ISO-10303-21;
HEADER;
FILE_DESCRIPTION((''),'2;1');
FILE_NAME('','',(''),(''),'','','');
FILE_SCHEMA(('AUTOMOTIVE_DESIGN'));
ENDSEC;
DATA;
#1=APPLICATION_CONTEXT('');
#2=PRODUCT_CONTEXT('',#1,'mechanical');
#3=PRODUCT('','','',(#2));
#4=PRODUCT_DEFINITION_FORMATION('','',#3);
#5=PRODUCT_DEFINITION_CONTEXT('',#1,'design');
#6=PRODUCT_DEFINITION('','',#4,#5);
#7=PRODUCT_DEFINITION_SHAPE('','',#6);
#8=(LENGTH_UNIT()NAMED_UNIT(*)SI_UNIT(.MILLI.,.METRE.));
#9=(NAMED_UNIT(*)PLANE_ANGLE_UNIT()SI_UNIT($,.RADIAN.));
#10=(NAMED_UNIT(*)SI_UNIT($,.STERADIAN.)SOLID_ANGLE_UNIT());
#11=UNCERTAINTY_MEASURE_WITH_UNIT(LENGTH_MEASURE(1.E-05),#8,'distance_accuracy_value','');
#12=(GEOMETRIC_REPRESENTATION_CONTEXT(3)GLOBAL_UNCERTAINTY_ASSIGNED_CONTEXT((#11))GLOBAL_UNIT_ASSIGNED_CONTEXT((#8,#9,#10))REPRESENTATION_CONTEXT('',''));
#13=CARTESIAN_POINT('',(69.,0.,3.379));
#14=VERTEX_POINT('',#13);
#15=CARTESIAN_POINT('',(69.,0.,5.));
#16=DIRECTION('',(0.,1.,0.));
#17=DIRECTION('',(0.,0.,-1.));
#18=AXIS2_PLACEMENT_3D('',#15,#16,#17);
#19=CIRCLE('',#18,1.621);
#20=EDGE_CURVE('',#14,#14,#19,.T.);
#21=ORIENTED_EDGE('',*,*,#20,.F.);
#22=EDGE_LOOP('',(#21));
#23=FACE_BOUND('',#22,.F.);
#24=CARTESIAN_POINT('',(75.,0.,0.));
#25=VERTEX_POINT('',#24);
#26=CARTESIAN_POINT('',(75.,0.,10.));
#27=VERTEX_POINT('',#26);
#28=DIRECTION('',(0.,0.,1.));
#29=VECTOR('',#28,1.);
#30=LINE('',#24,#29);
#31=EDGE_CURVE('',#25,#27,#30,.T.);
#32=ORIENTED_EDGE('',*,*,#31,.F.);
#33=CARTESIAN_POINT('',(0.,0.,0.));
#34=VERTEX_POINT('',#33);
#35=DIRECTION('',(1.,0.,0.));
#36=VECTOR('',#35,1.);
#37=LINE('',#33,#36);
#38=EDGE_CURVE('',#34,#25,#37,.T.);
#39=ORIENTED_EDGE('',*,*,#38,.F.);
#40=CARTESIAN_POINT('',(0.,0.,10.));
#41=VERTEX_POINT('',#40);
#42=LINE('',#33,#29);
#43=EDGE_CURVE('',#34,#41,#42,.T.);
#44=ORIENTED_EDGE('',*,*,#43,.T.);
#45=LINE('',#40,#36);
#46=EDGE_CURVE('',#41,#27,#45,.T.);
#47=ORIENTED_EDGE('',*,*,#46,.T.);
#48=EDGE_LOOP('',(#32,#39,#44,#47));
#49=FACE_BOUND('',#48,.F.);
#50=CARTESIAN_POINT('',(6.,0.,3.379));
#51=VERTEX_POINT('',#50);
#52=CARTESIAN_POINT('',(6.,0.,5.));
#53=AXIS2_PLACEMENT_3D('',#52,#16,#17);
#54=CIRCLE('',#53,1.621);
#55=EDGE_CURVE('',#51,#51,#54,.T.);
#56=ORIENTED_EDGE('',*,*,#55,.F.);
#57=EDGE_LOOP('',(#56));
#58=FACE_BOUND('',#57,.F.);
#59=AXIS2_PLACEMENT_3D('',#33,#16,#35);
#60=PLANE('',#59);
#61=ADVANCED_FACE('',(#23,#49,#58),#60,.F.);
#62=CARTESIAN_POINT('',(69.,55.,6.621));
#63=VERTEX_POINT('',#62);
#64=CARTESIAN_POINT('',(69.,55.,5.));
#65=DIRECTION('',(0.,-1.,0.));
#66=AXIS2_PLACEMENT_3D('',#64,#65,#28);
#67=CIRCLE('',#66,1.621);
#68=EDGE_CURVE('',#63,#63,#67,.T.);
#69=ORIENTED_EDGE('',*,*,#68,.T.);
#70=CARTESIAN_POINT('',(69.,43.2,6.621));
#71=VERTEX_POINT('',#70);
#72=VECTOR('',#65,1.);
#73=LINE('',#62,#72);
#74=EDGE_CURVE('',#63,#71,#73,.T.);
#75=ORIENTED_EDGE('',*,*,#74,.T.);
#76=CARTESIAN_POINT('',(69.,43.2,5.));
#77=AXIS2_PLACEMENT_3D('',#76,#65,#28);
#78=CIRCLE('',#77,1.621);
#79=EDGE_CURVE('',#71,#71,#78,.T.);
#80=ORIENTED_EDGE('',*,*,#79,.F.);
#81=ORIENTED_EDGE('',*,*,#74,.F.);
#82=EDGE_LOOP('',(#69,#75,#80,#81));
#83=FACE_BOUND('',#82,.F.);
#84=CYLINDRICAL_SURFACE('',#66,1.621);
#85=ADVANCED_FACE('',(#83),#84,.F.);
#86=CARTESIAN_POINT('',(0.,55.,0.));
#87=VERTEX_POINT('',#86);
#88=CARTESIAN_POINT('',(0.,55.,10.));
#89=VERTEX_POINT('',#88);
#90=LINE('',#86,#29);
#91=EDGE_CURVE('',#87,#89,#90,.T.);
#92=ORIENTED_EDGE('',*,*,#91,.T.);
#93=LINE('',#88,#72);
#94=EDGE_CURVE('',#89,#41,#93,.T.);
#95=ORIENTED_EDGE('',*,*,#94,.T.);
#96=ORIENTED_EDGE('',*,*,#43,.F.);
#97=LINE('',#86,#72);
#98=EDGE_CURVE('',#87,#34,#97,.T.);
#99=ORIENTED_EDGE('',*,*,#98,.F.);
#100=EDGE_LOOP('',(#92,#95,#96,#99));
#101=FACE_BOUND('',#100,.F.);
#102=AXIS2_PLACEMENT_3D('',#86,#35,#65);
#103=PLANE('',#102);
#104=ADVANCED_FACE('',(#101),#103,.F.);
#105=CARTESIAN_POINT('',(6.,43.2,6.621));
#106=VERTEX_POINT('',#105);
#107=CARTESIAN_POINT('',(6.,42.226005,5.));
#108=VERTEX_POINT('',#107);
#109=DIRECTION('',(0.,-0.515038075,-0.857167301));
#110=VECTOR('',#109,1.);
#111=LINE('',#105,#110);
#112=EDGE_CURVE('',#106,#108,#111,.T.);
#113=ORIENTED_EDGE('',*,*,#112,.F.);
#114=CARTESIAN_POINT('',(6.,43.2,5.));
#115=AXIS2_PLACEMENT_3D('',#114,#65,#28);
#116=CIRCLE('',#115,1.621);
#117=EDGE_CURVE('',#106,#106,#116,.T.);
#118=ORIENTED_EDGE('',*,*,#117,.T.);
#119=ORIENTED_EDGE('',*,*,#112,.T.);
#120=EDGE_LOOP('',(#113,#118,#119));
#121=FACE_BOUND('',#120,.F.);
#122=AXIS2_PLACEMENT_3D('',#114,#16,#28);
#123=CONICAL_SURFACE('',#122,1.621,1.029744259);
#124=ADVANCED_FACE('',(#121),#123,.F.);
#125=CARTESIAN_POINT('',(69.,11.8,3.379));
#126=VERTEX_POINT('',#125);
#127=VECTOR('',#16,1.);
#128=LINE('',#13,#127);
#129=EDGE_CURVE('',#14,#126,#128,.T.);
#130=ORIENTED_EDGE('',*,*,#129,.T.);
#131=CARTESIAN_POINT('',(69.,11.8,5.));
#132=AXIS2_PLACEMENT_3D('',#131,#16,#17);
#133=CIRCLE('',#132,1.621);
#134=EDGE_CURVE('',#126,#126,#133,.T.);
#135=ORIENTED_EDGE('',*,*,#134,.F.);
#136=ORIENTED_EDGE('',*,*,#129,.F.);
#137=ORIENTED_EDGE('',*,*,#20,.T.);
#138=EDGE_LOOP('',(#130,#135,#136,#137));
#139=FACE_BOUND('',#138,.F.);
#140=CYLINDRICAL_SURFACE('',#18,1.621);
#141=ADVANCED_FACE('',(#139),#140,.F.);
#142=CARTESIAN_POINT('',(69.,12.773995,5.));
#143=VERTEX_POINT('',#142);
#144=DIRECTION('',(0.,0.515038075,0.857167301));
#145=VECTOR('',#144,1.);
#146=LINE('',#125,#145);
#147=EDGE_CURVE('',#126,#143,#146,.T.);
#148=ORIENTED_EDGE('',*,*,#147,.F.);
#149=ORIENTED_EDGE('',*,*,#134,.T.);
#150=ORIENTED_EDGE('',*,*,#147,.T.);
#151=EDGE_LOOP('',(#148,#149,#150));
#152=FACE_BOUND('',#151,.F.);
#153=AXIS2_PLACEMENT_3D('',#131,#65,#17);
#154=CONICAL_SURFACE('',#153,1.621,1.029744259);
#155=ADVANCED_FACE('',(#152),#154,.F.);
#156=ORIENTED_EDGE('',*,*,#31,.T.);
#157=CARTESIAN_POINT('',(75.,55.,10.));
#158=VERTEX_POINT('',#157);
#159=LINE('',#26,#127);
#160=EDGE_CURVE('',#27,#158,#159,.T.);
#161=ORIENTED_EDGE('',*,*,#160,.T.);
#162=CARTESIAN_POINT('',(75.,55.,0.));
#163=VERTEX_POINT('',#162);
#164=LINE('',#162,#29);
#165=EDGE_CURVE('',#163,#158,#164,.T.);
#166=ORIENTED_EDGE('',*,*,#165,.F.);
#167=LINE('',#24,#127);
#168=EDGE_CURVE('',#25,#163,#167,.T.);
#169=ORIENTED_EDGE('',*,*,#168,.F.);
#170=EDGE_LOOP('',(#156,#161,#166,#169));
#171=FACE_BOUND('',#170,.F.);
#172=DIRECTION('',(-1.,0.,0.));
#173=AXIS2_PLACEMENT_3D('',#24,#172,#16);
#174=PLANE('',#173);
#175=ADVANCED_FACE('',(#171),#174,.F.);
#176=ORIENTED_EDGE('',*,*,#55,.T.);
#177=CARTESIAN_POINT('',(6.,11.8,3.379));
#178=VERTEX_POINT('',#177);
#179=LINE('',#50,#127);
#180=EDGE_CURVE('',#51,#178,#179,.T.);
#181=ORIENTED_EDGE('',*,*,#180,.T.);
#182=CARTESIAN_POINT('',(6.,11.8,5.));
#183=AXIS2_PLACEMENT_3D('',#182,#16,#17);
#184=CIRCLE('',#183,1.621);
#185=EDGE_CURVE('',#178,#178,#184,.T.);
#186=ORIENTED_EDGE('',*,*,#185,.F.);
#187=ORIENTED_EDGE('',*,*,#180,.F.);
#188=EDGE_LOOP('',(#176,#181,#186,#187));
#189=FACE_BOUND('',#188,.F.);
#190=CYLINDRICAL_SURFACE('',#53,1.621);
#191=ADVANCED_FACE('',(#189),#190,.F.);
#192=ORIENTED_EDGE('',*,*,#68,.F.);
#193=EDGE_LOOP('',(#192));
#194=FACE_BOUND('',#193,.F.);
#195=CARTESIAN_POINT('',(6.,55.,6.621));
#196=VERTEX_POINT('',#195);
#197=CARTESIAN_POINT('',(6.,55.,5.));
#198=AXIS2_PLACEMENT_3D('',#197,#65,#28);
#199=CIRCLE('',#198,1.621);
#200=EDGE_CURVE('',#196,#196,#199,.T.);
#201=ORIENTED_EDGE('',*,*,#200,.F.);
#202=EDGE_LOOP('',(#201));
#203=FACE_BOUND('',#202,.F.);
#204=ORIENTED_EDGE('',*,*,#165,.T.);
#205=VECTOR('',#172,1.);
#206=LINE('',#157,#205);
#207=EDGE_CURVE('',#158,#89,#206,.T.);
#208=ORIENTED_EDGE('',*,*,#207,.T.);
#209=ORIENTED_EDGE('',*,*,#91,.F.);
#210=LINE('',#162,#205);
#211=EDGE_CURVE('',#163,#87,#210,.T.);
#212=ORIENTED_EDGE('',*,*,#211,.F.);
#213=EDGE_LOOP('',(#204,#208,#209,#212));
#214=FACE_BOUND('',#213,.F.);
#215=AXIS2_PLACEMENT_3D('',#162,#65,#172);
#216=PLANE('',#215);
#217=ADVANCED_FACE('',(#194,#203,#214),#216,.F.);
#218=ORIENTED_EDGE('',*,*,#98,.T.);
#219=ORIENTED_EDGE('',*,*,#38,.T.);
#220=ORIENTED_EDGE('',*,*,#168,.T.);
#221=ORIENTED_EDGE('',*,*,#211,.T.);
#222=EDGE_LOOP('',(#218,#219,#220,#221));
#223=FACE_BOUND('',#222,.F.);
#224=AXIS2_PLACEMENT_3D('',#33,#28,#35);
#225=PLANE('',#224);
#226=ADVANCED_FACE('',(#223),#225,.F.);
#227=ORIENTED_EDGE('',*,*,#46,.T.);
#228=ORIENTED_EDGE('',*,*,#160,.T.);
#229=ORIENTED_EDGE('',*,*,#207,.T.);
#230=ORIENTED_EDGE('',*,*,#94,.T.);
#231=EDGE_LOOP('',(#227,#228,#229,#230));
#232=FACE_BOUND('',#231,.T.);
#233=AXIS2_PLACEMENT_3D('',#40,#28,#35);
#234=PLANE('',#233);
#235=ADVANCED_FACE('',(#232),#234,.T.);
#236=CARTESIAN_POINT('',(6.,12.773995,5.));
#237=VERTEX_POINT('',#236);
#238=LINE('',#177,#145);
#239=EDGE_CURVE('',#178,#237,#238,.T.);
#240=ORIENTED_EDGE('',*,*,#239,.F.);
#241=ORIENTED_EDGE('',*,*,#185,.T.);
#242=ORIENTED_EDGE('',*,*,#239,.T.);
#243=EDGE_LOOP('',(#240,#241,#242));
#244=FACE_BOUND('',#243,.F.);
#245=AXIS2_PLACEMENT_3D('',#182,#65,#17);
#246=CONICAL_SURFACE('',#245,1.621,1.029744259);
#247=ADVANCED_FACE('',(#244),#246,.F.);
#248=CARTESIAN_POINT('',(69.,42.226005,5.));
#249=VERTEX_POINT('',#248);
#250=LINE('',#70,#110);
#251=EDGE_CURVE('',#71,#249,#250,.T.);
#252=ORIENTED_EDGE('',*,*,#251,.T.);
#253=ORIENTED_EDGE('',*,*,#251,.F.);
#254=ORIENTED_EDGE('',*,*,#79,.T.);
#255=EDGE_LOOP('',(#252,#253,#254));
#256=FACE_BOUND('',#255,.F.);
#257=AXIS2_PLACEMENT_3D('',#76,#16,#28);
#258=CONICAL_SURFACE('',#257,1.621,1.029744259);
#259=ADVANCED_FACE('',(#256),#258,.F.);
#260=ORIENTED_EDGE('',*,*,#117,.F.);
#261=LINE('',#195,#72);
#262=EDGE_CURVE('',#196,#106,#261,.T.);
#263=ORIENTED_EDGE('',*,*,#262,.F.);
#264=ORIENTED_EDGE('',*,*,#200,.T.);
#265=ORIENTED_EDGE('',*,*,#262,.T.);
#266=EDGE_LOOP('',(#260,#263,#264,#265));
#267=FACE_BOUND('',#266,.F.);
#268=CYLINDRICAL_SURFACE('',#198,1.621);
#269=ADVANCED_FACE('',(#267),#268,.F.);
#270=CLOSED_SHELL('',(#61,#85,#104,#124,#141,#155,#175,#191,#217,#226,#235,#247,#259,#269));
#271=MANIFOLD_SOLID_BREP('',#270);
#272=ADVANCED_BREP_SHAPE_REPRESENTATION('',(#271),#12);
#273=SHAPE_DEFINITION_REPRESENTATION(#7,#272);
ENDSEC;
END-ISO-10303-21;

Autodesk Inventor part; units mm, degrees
ref_plane "YZ Plane" through (0, 0, 0) normal (1, 0, 0) x (0, 1, 0)
ref_plane "XZ Plane" through (0, 0, 0) normal (0, 1, 0) x (-1, 0, 0)
ref_plane "XY Plane" through (0, 0, 0) normal (0, 0, 1) x (1, 0, 0)
sketch "Sketch1" plane through (0, 0, 0) normal (0, 0, 1) x (1, 0, 0)
  line L0 (0, 0) -> (75, 0)
  line L1 (75, 0) -> (75, 55)
  line L2 (75, 55) -> (0, 55)
  line L3 (0, 55) -> (0, 0)
  dimension "d0" = 55
  dimension "d1" = 75
extrude "Extrusion1" add sketch "Sketch1" along normal blind 10
sketch "Sketch3" plane through (0, 0, 0) normal (0, -1, 0) x (1, 0, 0)
  line L0 (0, 0) -> (0, 10) projected
  line L1 (0, 0) -> (75, 0) projected
  line L2 (75, 0) -> (75, 10) projected
  point P0 (6, 5)
  point P1 (69, 5)
  dimension "d14" = 6
  dimension "d15" = 6
  dimension "d16" = 5
hole "Hole2" at (6, 0, 5) at (69, 0, 5) direction (0, 1, 0) diameter 3.242 depth 11.8 tip angle 118 thread size "M4x0.7" class "6H" standard "ANSI Metric M Profile"
sketch "Sketch4" plane through (0, 55, 0) normal (0, 1, 0) x (1, 0, 0)
  line L0 (75, 0) -> (75, -10) projected
  line L1 (75, 0) -> (0, 0) projected
  line L2 (0, 0) -> (0, -10) projected
  point P0 (6, -5)
  point P1 (69, -5)
  dimension "d24" = 5
  dimension "d25" = 6
  dimension "d26" = 6
hole "Hole3" at (6, 55, 5) at (69, 55, 5) direction (0, -1, 0) diameter 3.242 depth 11.8 tip angle 118 thread size "M4x0.7" class "6H" standard "ANSI Metric M Profile"
equation "\"d26\" = d25"
properties part number "Sides" material "Aluminum-6061"
